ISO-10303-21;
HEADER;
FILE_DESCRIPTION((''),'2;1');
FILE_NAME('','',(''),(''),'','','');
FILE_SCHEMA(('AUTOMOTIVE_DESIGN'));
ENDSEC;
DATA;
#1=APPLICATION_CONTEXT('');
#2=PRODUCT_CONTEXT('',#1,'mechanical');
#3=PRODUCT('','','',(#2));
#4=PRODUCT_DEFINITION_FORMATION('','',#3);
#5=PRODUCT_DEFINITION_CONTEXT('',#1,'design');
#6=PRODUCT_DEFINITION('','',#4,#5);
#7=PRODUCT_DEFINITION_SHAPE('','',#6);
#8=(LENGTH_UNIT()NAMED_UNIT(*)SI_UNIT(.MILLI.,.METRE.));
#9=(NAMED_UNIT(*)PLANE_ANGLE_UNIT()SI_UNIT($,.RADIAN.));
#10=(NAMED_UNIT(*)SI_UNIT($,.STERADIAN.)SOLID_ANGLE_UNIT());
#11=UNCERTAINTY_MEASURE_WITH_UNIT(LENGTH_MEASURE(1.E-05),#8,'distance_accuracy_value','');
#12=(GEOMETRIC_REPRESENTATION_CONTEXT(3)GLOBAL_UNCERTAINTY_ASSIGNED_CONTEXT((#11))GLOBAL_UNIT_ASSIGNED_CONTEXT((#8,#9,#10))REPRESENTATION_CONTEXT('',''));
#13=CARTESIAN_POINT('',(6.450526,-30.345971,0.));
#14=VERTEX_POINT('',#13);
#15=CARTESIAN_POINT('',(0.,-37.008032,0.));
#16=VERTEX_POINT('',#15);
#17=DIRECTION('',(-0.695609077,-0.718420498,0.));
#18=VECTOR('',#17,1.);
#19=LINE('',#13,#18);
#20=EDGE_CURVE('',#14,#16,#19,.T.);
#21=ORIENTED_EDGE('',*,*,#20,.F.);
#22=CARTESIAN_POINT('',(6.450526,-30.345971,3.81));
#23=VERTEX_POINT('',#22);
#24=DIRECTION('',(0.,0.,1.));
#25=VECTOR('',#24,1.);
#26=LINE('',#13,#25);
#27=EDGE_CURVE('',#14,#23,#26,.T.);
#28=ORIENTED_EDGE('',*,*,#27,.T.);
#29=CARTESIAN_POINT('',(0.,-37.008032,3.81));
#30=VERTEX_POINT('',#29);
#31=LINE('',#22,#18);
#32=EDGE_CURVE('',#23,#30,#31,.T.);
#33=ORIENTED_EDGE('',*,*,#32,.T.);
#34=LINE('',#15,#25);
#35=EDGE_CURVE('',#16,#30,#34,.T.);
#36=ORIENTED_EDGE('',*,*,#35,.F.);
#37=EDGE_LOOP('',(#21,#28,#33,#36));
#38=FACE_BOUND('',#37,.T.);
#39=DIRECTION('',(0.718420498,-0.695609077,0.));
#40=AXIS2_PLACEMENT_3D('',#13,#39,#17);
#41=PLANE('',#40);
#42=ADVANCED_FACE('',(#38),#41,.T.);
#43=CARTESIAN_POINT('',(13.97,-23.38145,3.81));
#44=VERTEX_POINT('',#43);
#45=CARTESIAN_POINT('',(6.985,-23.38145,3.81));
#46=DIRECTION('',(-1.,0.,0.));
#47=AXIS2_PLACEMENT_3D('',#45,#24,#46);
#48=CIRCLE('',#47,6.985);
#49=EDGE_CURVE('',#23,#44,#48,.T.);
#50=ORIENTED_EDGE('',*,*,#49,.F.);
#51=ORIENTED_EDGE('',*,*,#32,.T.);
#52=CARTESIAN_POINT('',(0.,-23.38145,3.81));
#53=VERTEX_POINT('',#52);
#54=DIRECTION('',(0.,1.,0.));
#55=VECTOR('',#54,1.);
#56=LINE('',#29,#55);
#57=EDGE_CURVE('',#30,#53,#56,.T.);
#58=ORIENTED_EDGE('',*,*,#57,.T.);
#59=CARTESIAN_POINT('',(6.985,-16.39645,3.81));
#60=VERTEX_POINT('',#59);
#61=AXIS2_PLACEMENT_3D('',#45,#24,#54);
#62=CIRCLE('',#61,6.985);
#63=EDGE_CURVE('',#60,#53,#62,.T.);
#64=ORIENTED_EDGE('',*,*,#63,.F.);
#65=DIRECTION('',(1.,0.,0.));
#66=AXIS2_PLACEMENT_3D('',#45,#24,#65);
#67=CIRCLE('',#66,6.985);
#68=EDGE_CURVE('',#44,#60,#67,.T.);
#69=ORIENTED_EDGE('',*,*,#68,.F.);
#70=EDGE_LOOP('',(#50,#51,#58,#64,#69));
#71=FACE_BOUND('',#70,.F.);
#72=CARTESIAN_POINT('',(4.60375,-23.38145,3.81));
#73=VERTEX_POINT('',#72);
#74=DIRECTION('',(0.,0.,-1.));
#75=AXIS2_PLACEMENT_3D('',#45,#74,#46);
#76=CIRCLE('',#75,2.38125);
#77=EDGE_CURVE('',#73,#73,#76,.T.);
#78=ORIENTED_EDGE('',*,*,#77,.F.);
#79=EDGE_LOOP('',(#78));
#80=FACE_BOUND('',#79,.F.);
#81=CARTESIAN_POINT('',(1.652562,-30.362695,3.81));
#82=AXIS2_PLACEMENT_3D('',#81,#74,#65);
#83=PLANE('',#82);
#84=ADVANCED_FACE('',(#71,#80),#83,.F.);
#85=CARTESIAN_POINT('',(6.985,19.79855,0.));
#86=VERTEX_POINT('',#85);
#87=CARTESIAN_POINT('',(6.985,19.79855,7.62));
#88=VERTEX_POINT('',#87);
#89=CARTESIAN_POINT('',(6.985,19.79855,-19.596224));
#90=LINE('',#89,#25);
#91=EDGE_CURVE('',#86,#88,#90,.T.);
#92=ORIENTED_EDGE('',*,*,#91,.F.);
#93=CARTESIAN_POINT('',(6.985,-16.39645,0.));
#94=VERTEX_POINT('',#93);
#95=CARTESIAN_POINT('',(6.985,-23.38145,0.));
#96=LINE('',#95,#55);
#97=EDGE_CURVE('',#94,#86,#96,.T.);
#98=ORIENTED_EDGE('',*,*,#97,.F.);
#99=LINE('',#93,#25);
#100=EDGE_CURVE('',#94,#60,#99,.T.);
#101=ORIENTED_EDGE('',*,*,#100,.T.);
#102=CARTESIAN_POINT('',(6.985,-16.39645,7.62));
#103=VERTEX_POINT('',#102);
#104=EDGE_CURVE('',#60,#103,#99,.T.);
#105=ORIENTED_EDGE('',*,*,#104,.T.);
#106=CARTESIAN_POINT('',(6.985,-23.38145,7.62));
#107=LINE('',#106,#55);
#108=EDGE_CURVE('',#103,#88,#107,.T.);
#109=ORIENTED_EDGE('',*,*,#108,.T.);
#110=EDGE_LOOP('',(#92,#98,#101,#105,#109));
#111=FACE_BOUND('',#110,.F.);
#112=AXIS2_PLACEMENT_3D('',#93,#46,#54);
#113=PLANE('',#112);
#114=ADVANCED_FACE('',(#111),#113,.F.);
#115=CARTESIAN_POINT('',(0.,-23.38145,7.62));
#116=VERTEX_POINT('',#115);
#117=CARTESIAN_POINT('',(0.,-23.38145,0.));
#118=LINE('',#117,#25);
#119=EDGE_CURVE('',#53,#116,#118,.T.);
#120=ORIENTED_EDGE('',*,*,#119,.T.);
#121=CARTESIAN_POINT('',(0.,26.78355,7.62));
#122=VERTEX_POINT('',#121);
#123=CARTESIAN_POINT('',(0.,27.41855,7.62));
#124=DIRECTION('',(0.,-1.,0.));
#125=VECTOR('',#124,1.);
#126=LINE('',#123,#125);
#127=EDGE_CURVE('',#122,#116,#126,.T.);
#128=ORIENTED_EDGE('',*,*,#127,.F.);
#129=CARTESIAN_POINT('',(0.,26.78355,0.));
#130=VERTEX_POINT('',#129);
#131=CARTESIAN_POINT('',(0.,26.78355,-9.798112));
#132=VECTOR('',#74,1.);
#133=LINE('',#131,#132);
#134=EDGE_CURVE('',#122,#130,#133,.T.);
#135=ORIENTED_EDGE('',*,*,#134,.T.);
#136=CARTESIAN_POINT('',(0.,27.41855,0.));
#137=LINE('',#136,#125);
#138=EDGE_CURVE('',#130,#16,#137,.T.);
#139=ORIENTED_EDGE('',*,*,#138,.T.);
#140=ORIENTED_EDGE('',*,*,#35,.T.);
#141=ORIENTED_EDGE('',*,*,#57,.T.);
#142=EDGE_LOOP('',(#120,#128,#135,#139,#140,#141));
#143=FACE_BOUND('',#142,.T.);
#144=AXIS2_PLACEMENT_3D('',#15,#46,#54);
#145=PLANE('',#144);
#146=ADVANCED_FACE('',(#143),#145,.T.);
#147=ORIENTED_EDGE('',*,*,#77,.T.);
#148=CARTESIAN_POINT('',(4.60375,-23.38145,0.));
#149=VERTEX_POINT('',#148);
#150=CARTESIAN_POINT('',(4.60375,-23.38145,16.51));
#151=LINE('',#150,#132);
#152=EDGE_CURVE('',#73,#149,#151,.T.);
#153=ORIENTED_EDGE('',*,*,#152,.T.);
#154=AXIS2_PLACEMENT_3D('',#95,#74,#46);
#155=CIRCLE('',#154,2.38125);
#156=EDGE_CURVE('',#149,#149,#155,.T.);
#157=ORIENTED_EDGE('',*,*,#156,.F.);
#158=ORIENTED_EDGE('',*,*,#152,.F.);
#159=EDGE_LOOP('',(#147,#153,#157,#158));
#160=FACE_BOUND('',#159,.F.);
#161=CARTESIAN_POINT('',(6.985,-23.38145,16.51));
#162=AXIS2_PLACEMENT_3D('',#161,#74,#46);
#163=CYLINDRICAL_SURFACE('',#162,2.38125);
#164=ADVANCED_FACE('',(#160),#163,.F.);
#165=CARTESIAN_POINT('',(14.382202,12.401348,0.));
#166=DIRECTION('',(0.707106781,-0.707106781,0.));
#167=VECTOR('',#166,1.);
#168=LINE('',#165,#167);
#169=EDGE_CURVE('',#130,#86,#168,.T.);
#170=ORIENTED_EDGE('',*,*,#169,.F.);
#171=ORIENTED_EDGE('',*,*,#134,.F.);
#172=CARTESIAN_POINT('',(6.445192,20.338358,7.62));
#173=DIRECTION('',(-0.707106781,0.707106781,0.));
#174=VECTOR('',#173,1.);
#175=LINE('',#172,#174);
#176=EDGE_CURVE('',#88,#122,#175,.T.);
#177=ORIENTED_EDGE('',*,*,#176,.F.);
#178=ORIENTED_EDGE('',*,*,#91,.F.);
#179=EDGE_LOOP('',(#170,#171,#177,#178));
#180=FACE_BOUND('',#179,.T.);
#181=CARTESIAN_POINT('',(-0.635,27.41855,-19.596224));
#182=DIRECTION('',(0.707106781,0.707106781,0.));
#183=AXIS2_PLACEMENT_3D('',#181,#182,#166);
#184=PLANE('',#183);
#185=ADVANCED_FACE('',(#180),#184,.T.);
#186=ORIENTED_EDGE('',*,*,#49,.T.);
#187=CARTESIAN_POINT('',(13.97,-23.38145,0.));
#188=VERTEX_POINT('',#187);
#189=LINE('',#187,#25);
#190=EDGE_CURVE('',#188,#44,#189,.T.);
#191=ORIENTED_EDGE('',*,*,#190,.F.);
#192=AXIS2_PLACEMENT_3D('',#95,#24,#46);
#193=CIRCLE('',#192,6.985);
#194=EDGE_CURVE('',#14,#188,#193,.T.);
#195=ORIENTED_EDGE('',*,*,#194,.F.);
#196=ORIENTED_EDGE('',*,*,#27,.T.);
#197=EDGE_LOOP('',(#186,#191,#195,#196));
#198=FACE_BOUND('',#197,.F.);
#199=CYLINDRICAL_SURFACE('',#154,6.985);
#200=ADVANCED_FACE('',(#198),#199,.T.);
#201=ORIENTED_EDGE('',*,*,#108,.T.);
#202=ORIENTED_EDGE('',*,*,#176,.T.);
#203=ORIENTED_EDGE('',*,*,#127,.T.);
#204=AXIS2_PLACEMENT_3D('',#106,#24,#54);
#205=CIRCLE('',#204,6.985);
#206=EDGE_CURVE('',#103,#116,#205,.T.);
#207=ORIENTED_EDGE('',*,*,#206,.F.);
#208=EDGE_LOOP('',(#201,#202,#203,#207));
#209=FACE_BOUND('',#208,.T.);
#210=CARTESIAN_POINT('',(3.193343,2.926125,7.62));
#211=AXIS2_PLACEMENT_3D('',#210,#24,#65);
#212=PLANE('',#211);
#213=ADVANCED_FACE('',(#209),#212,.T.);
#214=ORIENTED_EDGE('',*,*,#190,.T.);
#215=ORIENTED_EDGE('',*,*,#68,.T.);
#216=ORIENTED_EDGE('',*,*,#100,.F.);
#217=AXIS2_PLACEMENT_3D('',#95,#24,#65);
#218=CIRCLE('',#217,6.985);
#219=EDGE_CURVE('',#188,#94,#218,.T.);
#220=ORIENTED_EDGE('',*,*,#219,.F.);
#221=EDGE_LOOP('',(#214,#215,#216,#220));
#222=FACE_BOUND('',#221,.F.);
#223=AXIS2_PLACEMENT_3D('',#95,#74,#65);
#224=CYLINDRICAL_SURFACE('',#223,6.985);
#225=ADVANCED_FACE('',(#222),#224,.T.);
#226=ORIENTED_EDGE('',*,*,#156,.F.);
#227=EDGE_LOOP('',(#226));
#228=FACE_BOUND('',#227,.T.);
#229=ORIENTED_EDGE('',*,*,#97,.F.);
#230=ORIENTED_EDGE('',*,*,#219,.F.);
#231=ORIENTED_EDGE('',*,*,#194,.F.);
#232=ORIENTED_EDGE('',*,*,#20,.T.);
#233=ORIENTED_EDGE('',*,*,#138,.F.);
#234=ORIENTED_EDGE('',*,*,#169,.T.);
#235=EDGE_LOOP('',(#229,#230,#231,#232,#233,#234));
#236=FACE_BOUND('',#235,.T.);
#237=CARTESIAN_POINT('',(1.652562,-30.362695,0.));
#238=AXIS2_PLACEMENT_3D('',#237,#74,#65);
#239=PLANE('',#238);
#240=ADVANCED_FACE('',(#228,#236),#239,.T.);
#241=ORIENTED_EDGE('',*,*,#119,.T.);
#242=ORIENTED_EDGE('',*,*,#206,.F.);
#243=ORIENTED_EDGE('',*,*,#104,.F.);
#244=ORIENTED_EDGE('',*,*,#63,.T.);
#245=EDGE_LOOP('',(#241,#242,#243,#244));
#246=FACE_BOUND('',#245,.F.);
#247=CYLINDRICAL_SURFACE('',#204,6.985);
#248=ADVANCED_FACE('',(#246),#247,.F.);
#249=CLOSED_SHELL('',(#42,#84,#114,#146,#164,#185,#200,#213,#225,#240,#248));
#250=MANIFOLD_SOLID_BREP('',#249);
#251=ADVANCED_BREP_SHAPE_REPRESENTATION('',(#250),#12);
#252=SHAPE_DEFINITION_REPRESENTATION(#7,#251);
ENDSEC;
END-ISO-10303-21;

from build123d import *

# Parameters (mm, degrees)
F1_DEPTH    = 7.62
F3_DEPTH    = 3.81
F5_DEPTH    = 3.81
F7_D        = 4.7625
F7_DEPTH    = 12.7
F7_TIP      = 1.4307993491
F8_T1_DEPTH = 46.8124487366


# Not quite as in the source:
# - a fillet or chamfer that OpenCascade refuses, or shapes differently, is made with other operations: its cross-section is extruded or revolved along the edge and cut away or added


with BuildPart() as f1:
    # F0 (on Top) → F1 (new body)
    with BuildSketch(Plane.XY):
        with BuildLine():
            Line((6.985, 27.4185502146), (0, 27.4185502146))
            Line((0, 27.4185502146), (0, -23.3814497854))
            ThreePointArc((0, -23.3814497854), (2.0458591334, -18.4423089188), (6.985, -16.3964497854))
            Line((6.985, -16.3964497854), (6.985, 27.4185502146))
        make_face()
        with BuildLine():
            ThreePointArc((6.985, -16.3964497854), (2.0458591334, -18.4423089188), (0, -23.3814497854))
            Line((0, -23.3814497854), (6.985, -23.3814497854))
            Line((6.985, -23.3814497854), (6.985, -16.3964497854))
        make_face()
        with BuildLine():
            Line((6.985, -23.3814497854), (0, -23.3814497854))
            ThreePointArc((0, -23.3814497854), (6.985, -30.3664497854), (13.97, -23.3814497854))
            ThreePointArc((13.97, -23.3814497854), (11.9241408666, -18.4423089188), (6.985, -16.3964497854))
            Line((6.985, -16.3964497854), (6.985, -23.3814497854))
        make_face()
    extrude(amount=F1_DEPTH)

    # F2 (on face) → F3 (cut)
    with BuildSketch(Plane.XY.offset(7.62)):
        with BuildLine():
            ThreePointArc((0, -23.3814497854), (6.985, -30.3664497854), (13.97, -23.3814497854))
            ThreePointArc((13.97, -23.3814497854), (11.9241408666, -18.4423089188), (6.985, -16.3964497854))
            ThreePointArc((6.985, -16.3964497854), (2.0458591334, -18.4423089188), (0, -23.3814497854))
        make_face()
    extrude(amount=-F3_DEPTH, mode=Mode.SUBTRACT)

    # F4 (on face) → F5 (join)
    with BuildSketch(Plane(origin=(0, 0, 0), x_dir=(1, 0, 0), z_dir=(0, 0, -1))):
        with BuildLine():
            Line((0, 37.0080322027), (0, 23.3814497854))
            ThreePointArc((0, 23.3814497854), (1.8603767117, 28.1278653964), (6.4505257418, 30.345971468))
            Line((6.4505257418, 30.345971468), (0, 37.0080322027))
        make_face()
    extrude(amount=-F5_DEPTH)

    # F7
    with Locations(Plane.XY.offset(3.81)):
        with Locations((6.985, -23.3814497854)):
            Hole(F7_D / 2, depth=F7_DEPTH)
            with Locations((0, 0, -(F7_DEPTH + F7_TIP / 2))):  # 118° drill point
                Cone(0, F7_D / 2, F7_TIP, mode=Mode.SUBTRACT)

    # F8: chamfer of 7.62 on 1 edges, made by hand

    # F8_s2 → F8_t1 (cut)
    with BuildSketch(Plane.XY.offset(-19.5962243683)):
        Polygon((-0.635, 27.4185502146), (6.985, 19.7985502146), (6.985, 27.4185502146), align=None)
    extrude(amount=F8_T1_DEPTH, mode=Mode.SUBTRACT)


solid = f1.part
